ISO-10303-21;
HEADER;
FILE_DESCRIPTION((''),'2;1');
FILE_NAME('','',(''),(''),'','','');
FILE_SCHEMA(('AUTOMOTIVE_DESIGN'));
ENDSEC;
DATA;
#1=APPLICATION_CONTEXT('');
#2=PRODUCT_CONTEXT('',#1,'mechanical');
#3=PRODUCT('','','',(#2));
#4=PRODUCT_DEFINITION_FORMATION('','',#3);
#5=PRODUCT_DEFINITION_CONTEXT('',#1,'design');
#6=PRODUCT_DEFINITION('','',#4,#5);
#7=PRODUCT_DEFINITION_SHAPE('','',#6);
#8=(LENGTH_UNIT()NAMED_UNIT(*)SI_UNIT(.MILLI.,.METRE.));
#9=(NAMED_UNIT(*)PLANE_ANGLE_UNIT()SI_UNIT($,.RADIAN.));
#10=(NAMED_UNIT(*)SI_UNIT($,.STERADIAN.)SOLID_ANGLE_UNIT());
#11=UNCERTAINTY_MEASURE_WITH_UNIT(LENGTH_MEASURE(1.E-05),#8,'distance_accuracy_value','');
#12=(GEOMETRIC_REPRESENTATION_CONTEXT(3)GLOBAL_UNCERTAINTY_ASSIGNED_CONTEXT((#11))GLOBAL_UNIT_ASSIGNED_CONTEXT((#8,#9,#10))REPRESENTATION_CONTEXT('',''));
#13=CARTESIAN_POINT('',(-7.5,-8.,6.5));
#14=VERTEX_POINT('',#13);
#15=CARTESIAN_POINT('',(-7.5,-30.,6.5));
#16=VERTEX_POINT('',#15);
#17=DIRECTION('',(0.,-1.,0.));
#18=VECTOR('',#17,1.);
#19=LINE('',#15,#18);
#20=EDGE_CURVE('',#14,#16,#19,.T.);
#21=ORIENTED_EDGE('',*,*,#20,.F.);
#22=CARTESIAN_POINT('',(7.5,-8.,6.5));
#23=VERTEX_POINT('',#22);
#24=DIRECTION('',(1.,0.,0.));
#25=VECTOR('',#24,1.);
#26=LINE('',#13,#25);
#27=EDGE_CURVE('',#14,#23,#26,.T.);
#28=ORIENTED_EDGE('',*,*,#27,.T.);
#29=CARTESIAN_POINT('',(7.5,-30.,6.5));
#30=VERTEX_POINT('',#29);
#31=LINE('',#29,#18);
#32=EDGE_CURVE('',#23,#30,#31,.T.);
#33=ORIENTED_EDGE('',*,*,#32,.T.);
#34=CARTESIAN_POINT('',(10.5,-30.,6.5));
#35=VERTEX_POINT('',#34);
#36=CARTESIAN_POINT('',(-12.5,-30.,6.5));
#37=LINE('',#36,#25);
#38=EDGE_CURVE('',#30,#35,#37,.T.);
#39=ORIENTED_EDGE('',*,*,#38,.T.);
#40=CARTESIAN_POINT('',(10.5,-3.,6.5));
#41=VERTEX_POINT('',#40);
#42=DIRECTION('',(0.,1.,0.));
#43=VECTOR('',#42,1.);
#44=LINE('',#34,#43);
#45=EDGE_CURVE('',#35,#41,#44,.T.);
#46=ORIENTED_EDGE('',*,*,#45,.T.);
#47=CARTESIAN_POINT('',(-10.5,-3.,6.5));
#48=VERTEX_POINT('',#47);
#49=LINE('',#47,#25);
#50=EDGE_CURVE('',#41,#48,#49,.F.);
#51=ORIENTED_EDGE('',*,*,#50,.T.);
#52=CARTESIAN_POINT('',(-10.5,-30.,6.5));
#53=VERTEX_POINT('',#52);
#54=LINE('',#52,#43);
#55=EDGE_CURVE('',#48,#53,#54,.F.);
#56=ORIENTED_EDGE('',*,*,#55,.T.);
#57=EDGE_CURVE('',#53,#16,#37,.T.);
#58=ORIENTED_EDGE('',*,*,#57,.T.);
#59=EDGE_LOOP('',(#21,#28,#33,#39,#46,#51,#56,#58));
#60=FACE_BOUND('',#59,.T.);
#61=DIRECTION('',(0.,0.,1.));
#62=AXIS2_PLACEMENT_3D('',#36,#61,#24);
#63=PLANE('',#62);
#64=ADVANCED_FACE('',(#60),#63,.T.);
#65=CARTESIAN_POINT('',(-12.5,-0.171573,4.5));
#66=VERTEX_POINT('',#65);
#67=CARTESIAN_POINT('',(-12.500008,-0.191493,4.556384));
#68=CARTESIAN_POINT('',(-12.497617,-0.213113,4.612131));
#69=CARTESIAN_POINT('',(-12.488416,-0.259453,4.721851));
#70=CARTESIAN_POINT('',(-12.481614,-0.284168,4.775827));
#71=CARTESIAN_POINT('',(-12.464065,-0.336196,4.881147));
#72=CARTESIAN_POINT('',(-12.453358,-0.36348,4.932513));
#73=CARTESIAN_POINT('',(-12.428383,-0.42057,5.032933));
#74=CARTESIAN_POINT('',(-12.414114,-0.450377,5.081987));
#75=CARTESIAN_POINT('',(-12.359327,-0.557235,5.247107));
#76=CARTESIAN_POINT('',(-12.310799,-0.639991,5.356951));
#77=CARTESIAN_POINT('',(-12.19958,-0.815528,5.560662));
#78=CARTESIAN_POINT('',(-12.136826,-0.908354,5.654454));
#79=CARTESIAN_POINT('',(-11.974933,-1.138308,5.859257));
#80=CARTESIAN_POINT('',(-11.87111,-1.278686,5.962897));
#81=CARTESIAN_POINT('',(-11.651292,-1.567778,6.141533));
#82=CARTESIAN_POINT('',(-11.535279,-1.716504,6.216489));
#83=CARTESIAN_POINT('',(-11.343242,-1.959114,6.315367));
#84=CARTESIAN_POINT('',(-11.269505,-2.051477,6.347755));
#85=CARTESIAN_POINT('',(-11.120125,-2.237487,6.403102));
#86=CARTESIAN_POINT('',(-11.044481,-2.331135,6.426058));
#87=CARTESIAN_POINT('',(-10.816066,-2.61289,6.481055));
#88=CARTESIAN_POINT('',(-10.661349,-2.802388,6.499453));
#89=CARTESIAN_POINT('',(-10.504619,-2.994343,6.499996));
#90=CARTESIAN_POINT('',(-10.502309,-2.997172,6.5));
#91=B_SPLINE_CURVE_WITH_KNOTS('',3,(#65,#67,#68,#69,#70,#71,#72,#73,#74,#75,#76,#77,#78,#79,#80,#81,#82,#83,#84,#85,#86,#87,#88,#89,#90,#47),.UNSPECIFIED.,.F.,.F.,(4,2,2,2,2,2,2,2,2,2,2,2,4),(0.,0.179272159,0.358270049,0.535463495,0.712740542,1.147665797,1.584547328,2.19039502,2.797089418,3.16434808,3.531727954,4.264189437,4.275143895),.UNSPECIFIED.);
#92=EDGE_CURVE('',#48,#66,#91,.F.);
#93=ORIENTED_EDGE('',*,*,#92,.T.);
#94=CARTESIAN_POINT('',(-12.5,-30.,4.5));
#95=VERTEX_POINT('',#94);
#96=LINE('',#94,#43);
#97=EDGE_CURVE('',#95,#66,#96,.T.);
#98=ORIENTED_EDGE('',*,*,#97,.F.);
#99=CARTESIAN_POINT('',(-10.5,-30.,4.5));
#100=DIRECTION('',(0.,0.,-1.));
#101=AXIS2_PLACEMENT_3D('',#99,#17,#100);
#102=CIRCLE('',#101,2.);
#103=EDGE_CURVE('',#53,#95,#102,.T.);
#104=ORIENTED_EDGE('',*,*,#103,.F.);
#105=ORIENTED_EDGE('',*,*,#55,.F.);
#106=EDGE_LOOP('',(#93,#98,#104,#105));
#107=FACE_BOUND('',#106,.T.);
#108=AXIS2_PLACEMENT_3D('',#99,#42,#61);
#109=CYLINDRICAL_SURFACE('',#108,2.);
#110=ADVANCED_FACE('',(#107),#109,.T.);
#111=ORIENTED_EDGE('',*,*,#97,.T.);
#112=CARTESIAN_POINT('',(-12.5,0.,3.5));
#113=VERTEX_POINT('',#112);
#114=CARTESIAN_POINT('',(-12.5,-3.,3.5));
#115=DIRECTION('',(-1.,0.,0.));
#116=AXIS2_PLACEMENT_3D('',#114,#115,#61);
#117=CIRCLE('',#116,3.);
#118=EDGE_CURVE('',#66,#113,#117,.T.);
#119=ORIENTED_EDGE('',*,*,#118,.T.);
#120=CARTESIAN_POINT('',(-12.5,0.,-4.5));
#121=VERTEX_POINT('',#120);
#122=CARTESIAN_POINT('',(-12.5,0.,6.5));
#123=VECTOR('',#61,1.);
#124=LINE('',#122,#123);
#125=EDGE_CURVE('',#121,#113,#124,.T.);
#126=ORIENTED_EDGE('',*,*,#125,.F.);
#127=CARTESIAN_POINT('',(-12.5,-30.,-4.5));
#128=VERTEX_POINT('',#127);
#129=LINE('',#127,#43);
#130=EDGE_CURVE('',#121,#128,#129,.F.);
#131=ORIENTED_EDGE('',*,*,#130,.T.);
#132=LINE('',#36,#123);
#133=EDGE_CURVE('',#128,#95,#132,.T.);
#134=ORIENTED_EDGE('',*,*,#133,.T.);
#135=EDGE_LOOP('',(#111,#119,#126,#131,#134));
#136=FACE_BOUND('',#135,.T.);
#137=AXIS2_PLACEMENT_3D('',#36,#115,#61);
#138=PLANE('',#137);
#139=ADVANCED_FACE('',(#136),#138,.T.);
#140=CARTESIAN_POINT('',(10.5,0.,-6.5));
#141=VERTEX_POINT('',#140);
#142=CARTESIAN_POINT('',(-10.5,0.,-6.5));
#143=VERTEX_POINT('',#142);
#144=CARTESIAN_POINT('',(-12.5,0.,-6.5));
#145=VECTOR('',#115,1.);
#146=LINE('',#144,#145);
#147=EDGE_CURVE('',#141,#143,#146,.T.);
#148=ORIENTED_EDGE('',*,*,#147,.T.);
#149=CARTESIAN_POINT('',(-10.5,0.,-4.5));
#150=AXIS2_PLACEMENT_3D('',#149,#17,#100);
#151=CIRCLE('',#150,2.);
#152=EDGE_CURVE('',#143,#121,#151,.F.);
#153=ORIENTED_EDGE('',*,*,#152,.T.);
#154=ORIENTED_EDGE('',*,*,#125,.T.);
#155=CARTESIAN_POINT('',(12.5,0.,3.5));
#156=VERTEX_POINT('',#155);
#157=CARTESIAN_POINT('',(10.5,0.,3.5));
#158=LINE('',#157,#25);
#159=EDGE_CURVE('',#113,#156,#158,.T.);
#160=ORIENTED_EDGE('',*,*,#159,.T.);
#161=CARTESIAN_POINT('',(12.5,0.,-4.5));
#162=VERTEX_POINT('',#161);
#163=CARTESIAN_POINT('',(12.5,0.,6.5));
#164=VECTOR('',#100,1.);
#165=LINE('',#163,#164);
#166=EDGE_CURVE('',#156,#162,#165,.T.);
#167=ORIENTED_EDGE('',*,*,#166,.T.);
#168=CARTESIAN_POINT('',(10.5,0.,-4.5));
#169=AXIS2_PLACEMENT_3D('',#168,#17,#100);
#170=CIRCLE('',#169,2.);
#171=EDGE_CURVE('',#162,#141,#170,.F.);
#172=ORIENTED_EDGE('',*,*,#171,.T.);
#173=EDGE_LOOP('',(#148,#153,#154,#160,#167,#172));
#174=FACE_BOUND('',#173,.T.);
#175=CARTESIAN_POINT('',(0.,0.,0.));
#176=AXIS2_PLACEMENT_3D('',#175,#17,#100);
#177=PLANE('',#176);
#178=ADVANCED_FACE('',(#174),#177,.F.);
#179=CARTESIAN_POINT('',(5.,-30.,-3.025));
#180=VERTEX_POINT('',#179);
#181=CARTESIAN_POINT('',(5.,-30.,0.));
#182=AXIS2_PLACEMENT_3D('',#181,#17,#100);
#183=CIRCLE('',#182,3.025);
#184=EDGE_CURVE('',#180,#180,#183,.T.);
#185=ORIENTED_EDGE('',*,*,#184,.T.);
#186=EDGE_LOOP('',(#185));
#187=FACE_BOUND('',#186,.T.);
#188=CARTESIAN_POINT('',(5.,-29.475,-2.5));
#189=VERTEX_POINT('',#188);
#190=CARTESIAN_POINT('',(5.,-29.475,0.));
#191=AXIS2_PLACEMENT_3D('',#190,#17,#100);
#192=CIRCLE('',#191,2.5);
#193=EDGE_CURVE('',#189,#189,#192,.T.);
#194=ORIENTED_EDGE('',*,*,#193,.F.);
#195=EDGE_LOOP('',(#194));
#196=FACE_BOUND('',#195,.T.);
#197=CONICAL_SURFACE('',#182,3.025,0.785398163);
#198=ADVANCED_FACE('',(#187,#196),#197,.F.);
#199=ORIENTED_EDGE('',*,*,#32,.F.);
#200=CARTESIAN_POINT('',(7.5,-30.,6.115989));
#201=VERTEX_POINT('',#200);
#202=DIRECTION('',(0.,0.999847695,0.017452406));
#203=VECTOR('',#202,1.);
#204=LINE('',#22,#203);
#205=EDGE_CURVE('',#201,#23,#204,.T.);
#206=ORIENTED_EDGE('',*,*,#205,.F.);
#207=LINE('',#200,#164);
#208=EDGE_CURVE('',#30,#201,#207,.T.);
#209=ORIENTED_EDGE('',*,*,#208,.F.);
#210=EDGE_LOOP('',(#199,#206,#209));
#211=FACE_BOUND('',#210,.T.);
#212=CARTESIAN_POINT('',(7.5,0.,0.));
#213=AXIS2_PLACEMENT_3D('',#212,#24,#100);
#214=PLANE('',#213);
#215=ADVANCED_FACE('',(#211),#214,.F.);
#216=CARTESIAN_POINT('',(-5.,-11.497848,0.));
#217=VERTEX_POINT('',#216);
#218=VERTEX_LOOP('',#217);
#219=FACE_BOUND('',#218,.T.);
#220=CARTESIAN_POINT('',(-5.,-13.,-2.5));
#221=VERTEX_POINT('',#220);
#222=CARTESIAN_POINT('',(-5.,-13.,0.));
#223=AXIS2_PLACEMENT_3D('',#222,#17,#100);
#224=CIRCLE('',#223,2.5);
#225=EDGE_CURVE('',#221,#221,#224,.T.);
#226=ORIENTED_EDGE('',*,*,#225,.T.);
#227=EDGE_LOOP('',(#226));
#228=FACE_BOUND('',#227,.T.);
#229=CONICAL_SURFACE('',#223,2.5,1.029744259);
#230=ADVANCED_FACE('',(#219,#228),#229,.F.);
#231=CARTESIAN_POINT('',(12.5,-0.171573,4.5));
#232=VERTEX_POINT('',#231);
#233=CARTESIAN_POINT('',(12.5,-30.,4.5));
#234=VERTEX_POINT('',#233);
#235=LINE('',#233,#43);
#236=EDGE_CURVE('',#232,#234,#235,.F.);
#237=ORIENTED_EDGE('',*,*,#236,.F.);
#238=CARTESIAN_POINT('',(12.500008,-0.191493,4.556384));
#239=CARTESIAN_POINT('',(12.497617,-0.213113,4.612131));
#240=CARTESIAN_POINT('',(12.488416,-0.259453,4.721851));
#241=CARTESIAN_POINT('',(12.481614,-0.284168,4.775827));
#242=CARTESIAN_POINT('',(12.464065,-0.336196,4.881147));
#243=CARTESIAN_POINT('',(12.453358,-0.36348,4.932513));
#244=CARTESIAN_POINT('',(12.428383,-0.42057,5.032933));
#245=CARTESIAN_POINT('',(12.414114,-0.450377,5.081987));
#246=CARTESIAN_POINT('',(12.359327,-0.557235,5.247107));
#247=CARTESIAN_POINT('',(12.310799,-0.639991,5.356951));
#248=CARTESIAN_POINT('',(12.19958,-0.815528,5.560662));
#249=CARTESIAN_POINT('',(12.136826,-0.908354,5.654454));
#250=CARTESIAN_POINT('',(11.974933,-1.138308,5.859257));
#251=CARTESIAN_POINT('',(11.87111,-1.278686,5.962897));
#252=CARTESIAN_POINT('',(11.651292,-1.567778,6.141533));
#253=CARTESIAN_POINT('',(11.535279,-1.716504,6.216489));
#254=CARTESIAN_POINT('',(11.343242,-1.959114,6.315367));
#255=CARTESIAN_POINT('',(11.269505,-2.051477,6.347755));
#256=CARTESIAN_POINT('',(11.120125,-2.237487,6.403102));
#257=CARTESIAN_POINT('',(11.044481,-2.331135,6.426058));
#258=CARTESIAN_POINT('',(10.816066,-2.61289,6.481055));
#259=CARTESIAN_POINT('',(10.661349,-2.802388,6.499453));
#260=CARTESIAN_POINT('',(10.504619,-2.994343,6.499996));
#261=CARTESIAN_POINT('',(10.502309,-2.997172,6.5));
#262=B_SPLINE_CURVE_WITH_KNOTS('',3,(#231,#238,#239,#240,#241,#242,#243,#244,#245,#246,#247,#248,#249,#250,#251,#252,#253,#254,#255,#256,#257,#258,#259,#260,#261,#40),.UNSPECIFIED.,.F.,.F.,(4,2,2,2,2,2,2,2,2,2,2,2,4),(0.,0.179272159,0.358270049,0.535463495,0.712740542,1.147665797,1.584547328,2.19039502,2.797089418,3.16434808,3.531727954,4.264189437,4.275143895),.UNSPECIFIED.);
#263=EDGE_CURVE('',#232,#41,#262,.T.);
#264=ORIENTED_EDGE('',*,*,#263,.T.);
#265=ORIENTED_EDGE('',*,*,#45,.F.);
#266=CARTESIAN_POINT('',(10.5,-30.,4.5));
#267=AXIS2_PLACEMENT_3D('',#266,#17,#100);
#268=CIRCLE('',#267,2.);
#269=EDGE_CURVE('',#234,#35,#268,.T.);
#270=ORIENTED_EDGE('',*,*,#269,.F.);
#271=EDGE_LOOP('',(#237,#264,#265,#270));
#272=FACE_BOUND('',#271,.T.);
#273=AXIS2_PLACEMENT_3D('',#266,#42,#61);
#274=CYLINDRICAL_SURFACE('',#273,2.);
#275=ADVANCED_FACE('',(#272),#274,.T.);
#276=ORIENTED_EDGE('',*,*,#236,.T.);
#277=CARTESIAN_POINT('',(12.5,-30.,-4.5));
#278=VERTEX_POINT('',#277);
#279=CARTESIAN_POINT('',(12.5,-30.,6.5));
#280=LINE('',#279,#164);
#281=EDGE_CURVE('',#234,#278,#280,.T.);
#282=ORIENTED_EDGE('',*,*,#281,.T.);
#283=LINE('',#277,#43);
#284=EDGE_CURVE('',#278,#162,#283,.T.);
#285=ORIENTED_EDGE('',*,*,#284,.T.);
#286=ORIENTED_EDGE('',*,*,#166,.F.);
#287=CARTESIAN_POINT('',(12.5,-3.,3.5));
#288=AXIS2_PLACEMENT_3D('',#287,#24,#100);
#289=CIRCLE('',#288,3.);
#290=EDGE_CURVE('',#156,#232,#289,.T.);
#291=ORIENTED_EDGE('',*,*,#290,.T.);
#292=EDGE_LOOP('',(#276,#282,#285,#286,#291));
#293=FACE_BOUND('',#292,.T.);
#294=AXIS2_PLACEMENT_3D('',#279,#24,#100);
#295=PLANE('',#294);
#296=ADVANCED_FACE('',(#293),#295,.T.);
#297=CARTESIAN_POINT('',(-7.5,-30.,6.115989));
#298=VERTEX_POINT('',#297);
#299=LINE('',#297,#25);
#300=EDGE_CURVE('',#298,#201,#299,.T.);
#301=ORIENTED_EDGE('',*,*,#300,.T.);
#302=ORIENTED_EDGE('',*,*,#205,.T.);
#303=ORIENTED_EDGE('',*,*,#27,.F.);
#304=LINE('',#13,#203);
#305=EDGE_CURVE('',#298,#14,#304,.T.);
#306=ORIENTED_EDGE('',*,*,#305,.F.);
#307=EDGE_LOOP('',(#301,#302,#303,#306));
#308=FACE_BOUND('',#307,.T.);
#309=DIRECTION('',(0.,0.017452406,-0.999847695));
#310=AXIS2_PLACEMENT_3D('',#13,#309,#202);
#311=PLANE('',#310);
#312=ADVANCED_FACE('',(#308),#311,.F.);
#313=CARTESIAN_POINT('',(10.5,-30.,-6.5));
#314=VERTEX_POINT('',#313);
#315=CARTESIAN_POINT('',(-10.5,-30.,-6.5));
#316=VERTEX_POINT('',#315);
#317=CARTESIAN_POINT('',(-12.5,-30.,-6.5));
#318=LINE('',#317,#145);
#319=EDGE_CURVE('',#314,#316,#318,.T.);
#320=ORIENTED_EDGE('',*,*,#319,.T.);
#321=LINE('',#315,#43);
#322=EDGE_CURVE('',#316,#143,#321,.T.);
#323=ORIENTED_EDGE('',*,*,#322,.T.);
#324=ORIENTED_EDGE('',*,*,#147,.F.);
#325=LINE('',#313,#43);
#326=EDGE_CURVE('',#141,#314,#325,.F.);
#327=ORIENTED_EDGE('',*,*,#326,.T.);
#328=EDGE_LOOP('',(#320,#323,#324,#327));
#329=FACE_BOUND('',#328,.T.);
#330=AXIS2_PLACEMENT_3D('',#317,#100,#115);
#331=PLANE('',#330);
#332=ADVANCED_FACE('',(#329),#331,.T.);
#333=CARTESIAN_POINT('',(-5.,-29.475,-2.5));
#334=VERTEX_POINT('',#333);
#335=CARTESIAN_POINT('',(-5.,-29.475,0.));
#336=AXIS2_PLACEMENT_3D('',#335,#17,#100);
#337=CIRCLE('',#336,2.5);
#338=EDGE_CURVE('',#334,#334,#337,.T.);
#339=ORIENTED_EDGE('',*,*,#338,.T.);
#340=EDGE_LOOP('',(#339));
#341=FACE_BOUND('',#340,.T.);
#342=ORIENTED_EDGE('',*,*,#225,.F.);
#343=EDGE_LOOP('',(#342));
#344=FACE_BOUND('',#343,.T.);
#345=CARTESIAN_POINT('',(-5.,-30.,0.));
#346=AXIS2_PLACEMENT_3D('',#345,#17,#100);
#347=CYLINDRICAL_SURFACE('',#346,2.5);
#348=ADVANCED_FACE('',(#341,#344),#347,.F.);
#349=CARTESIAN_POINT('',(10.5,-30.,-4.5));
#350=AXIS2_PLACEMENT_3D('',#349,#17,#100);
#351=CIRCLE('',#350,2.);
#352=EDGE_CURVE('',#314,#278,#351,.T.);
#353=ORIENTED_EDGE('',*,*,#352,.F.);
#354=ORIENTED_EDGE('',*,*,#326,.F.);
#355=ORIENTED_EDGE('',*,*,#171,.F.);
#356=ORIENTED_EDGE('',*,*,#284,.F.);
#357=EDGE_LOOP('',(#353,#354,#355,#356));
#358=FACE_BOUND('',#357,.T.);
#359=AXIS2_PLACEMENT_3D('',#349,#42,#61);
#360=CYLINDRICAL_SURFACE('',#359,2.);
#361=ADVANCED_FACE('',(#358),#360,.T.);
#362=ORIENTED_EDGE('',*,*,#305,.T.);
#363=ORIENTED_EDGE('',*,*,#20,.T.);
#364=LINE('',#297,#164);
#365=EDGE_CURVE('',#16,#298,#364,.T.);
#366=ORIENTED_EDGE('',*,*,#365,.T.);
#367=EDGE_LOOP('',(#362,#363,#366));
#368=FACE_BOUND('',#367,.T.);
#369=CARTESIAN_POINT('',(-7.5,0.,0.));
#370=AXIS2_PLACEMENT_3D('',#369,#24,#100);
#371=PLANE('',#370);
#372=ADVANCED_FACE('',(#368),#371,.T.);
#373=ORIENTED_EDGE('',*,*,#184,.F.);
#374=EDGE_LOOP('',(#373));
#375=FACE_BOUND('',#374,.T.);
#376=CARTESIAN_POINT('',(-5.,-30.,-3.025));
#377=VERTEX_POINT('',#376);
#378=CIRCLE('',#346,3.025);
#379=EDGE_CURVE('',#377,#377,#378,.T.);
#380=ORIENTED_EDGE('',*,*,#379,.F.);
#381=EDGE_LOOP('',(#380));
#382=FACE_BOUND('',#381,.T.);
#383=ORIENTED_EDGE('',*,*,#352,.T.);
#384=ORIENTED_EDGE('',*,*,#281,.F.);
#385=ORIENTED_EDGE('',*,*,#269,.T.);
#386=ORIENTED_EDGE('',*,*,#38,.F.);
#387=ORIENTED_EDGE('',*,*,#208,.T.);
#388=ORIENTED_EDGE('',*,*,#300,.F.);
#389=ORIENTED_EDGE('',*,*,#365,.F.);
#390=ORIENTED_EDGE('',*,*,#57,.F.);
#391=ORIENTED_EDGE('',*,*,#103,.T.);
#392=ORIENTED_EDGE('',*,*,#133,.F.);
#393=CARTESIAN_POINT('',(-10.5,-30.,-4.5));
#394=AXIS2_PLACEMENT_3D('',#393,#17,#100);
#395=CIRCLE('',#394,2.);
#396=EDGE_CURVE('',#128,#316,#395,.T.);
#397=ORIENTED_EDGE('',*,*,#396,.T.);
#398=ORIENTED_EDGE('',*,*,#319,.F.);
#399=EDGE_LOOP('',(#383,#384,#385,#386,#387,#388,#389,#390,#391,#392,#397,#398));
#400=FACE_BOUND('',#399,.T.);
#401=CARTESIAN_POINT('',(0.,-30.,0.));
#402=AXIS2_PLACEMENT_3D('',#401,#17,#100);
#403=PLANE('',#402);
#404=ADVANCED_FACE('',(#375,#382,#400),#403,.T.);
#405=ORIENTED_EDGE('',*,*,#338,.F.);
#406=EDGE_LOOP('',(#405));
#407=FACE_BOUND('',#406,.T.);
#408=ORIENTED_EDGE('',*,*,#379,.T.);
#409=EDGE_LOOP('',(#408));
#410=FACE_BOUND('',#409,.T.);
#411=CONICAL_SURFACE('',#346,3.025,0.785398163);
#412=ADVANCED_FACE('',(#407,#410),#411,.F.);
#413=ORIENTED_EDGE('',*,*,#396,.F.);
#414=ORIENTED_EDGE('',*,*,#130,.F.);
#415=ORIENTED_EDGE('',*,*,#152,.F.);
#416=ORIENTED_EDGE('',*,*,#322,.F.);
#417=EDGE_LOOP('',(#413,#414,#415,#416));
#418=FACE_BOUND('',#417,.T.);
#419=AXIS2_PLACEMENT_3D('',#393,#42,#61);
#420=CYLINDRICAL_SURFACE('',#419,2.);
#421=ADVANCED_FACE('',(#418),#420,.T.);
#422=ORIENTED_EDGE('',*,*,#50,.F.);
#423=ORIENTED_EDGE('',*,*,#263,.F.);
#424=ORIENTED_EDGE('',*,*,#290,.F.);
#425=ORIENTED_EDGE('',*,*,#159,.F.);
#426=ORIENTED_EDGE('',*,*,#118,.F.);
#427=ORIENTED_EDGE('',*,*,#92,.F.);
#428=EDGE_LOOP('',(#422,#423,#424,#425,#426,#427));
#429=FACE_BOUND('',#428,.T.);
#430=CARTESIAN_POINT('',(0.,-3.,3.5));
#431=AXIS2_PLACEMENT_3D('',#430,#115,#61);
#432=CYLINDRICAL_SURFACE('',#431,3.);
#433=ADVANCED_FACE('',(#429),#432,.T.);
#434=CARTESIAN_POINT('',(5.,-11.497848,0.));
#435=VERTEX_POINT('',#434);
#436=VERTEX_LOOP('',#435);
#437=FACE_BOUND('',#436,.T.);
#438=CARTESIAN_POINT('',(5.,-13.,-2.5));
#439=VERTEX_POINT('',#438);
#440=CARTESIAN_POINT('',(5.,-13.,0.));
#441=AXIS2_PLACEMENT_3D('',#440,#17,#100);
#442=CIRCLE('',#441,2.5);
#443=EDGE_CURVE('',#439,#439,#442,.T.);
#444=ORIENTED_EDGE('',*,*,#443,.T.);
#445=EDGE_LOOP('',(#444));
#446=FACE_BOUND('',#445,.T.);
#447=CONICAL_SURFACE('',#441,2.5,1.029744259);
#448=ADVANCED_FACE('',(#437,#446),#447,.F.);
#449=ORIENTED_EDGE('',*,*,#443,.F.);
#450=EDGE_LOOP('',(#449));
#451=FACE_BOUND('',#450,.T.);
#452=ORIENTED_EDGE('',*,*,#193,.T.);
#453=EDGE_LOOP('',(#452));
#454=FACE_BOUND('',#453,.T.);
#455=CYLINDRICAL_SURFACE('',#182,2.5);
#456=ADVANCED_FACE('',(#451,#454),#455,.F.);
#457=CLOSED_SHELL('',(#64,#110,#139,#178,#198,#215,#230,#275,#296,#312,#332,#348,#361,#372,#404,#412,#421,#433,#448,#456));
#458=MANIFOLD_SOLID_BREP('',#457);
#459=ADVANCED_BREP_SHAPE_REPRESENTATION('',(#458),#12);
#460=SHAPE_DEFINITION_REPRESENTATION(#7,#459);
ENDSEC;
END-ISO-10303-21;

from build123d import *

# Parameters (mm, degrees)
SKETCH1_W                   = 25
SKETCH1_H                   = 13
BOSS_EXTRUDE1_DEPTH         = 30
FILLET1_R                   = 2
FILLET2_R                   = 3
M6_TAPPED_HOLE1_D           = 5
M6_TAPPED_HOLE1_DEPTH       = 17
M6_TAPPED_HOLE1_CSINK_D     = 6.05
M6_TAPPED_HOLE1_CSINK_ANGLE = 90
M6_TAPPED_HOLE1_TIP         = 1.502151548
CUT_EXTRUDE1_DEPTH          = 7.5


with BuildPart() as part:
    # Sketch1 → Boss-Extrude1 (new body)
    with BuildSketch(Plane(origin=(0, 0, 0), x_dir=(1, 0, 0), z_dir=(0, 1, 0))):
        Rectangle(SKETCH1_W, SKETCH1_H)
    extrude(amount=-BOSS_EXTRUDE1_DEPTH)

    # Fillet1
    fillet1_edges = [part.edges().sort_by_distance(p)[0] for p in [
        (12.5, -15, 6.5),
        (-12.5, -15, 6.5),
        (-12.5, -15, -6.5),
        (12.5, -15, -6.5),
    ]]
    fillet(fillet1_edges, radius=FILLET1_R)

    # Fillet2
    # the kernel refuses this fillet: 3 mm, written as the material it takes off along each edge
    with BuildSketch(Plane(origin=(-18, 0, 6.5), x_dir=(0, -1, 0), z_dir=(1, 0, 0))) as fillet2_piece_1:
        with BuildLine():
            CenterArc((FILLET2_R, FILLET2_R), FILLET2_R, 180, 90)
            Line((0, FILLET2_R), (0, 0))
            Line((0, 0), (FILLET2_R, 0))
        make_face()
    extrude(amount=36, mode=Mode.SUBTRACT)

    # M6 Tapped Hole1
    with Locations(Plane(origin=(0, -30, 0), x_dir=(-1, 0, 0), z_dir=(0, -1, 0))):
        with Locations((-5, 0), (5, 0)):
            CounterSinkHole(M6_TAPPED_HOLE1_D / 2, M6_TAPPED_HOLE1_CSINK_D / 2, depth=M6_TAPPED_HOLE1_DEPTH, counter_sink_angle=M6_TAPPED_HOLE1_CSINK_ANGLE)
            with Locations((0, 0, -(M6_TAPPED_HOLE1_DEPTH + M6_TAPPED_HOLE1_TIP / 2))):  # 118° drill point
                Cone(0, M6_TAPPED_HOLE1_D / 2, M6_TAPPED_HOLE1_TIP, mode=Mode.SUBTRACT)

    # Sketch5 → Cut-Extrude1 (cut, symmetric)
    with BuildSketch(Plane(origin=(0, 0, 0), x_dir=(0, 0, -1), z_dir=(1, 0, 0))):
        Polygon((-6.5, -8), (-6.115988572, -30), (-6.5, -30), align=None)
    extrude(amount=CUT_EXTRUDE1_DEPTH, both=True, mode=Mode.SUBTRACT)


solid = part.part
